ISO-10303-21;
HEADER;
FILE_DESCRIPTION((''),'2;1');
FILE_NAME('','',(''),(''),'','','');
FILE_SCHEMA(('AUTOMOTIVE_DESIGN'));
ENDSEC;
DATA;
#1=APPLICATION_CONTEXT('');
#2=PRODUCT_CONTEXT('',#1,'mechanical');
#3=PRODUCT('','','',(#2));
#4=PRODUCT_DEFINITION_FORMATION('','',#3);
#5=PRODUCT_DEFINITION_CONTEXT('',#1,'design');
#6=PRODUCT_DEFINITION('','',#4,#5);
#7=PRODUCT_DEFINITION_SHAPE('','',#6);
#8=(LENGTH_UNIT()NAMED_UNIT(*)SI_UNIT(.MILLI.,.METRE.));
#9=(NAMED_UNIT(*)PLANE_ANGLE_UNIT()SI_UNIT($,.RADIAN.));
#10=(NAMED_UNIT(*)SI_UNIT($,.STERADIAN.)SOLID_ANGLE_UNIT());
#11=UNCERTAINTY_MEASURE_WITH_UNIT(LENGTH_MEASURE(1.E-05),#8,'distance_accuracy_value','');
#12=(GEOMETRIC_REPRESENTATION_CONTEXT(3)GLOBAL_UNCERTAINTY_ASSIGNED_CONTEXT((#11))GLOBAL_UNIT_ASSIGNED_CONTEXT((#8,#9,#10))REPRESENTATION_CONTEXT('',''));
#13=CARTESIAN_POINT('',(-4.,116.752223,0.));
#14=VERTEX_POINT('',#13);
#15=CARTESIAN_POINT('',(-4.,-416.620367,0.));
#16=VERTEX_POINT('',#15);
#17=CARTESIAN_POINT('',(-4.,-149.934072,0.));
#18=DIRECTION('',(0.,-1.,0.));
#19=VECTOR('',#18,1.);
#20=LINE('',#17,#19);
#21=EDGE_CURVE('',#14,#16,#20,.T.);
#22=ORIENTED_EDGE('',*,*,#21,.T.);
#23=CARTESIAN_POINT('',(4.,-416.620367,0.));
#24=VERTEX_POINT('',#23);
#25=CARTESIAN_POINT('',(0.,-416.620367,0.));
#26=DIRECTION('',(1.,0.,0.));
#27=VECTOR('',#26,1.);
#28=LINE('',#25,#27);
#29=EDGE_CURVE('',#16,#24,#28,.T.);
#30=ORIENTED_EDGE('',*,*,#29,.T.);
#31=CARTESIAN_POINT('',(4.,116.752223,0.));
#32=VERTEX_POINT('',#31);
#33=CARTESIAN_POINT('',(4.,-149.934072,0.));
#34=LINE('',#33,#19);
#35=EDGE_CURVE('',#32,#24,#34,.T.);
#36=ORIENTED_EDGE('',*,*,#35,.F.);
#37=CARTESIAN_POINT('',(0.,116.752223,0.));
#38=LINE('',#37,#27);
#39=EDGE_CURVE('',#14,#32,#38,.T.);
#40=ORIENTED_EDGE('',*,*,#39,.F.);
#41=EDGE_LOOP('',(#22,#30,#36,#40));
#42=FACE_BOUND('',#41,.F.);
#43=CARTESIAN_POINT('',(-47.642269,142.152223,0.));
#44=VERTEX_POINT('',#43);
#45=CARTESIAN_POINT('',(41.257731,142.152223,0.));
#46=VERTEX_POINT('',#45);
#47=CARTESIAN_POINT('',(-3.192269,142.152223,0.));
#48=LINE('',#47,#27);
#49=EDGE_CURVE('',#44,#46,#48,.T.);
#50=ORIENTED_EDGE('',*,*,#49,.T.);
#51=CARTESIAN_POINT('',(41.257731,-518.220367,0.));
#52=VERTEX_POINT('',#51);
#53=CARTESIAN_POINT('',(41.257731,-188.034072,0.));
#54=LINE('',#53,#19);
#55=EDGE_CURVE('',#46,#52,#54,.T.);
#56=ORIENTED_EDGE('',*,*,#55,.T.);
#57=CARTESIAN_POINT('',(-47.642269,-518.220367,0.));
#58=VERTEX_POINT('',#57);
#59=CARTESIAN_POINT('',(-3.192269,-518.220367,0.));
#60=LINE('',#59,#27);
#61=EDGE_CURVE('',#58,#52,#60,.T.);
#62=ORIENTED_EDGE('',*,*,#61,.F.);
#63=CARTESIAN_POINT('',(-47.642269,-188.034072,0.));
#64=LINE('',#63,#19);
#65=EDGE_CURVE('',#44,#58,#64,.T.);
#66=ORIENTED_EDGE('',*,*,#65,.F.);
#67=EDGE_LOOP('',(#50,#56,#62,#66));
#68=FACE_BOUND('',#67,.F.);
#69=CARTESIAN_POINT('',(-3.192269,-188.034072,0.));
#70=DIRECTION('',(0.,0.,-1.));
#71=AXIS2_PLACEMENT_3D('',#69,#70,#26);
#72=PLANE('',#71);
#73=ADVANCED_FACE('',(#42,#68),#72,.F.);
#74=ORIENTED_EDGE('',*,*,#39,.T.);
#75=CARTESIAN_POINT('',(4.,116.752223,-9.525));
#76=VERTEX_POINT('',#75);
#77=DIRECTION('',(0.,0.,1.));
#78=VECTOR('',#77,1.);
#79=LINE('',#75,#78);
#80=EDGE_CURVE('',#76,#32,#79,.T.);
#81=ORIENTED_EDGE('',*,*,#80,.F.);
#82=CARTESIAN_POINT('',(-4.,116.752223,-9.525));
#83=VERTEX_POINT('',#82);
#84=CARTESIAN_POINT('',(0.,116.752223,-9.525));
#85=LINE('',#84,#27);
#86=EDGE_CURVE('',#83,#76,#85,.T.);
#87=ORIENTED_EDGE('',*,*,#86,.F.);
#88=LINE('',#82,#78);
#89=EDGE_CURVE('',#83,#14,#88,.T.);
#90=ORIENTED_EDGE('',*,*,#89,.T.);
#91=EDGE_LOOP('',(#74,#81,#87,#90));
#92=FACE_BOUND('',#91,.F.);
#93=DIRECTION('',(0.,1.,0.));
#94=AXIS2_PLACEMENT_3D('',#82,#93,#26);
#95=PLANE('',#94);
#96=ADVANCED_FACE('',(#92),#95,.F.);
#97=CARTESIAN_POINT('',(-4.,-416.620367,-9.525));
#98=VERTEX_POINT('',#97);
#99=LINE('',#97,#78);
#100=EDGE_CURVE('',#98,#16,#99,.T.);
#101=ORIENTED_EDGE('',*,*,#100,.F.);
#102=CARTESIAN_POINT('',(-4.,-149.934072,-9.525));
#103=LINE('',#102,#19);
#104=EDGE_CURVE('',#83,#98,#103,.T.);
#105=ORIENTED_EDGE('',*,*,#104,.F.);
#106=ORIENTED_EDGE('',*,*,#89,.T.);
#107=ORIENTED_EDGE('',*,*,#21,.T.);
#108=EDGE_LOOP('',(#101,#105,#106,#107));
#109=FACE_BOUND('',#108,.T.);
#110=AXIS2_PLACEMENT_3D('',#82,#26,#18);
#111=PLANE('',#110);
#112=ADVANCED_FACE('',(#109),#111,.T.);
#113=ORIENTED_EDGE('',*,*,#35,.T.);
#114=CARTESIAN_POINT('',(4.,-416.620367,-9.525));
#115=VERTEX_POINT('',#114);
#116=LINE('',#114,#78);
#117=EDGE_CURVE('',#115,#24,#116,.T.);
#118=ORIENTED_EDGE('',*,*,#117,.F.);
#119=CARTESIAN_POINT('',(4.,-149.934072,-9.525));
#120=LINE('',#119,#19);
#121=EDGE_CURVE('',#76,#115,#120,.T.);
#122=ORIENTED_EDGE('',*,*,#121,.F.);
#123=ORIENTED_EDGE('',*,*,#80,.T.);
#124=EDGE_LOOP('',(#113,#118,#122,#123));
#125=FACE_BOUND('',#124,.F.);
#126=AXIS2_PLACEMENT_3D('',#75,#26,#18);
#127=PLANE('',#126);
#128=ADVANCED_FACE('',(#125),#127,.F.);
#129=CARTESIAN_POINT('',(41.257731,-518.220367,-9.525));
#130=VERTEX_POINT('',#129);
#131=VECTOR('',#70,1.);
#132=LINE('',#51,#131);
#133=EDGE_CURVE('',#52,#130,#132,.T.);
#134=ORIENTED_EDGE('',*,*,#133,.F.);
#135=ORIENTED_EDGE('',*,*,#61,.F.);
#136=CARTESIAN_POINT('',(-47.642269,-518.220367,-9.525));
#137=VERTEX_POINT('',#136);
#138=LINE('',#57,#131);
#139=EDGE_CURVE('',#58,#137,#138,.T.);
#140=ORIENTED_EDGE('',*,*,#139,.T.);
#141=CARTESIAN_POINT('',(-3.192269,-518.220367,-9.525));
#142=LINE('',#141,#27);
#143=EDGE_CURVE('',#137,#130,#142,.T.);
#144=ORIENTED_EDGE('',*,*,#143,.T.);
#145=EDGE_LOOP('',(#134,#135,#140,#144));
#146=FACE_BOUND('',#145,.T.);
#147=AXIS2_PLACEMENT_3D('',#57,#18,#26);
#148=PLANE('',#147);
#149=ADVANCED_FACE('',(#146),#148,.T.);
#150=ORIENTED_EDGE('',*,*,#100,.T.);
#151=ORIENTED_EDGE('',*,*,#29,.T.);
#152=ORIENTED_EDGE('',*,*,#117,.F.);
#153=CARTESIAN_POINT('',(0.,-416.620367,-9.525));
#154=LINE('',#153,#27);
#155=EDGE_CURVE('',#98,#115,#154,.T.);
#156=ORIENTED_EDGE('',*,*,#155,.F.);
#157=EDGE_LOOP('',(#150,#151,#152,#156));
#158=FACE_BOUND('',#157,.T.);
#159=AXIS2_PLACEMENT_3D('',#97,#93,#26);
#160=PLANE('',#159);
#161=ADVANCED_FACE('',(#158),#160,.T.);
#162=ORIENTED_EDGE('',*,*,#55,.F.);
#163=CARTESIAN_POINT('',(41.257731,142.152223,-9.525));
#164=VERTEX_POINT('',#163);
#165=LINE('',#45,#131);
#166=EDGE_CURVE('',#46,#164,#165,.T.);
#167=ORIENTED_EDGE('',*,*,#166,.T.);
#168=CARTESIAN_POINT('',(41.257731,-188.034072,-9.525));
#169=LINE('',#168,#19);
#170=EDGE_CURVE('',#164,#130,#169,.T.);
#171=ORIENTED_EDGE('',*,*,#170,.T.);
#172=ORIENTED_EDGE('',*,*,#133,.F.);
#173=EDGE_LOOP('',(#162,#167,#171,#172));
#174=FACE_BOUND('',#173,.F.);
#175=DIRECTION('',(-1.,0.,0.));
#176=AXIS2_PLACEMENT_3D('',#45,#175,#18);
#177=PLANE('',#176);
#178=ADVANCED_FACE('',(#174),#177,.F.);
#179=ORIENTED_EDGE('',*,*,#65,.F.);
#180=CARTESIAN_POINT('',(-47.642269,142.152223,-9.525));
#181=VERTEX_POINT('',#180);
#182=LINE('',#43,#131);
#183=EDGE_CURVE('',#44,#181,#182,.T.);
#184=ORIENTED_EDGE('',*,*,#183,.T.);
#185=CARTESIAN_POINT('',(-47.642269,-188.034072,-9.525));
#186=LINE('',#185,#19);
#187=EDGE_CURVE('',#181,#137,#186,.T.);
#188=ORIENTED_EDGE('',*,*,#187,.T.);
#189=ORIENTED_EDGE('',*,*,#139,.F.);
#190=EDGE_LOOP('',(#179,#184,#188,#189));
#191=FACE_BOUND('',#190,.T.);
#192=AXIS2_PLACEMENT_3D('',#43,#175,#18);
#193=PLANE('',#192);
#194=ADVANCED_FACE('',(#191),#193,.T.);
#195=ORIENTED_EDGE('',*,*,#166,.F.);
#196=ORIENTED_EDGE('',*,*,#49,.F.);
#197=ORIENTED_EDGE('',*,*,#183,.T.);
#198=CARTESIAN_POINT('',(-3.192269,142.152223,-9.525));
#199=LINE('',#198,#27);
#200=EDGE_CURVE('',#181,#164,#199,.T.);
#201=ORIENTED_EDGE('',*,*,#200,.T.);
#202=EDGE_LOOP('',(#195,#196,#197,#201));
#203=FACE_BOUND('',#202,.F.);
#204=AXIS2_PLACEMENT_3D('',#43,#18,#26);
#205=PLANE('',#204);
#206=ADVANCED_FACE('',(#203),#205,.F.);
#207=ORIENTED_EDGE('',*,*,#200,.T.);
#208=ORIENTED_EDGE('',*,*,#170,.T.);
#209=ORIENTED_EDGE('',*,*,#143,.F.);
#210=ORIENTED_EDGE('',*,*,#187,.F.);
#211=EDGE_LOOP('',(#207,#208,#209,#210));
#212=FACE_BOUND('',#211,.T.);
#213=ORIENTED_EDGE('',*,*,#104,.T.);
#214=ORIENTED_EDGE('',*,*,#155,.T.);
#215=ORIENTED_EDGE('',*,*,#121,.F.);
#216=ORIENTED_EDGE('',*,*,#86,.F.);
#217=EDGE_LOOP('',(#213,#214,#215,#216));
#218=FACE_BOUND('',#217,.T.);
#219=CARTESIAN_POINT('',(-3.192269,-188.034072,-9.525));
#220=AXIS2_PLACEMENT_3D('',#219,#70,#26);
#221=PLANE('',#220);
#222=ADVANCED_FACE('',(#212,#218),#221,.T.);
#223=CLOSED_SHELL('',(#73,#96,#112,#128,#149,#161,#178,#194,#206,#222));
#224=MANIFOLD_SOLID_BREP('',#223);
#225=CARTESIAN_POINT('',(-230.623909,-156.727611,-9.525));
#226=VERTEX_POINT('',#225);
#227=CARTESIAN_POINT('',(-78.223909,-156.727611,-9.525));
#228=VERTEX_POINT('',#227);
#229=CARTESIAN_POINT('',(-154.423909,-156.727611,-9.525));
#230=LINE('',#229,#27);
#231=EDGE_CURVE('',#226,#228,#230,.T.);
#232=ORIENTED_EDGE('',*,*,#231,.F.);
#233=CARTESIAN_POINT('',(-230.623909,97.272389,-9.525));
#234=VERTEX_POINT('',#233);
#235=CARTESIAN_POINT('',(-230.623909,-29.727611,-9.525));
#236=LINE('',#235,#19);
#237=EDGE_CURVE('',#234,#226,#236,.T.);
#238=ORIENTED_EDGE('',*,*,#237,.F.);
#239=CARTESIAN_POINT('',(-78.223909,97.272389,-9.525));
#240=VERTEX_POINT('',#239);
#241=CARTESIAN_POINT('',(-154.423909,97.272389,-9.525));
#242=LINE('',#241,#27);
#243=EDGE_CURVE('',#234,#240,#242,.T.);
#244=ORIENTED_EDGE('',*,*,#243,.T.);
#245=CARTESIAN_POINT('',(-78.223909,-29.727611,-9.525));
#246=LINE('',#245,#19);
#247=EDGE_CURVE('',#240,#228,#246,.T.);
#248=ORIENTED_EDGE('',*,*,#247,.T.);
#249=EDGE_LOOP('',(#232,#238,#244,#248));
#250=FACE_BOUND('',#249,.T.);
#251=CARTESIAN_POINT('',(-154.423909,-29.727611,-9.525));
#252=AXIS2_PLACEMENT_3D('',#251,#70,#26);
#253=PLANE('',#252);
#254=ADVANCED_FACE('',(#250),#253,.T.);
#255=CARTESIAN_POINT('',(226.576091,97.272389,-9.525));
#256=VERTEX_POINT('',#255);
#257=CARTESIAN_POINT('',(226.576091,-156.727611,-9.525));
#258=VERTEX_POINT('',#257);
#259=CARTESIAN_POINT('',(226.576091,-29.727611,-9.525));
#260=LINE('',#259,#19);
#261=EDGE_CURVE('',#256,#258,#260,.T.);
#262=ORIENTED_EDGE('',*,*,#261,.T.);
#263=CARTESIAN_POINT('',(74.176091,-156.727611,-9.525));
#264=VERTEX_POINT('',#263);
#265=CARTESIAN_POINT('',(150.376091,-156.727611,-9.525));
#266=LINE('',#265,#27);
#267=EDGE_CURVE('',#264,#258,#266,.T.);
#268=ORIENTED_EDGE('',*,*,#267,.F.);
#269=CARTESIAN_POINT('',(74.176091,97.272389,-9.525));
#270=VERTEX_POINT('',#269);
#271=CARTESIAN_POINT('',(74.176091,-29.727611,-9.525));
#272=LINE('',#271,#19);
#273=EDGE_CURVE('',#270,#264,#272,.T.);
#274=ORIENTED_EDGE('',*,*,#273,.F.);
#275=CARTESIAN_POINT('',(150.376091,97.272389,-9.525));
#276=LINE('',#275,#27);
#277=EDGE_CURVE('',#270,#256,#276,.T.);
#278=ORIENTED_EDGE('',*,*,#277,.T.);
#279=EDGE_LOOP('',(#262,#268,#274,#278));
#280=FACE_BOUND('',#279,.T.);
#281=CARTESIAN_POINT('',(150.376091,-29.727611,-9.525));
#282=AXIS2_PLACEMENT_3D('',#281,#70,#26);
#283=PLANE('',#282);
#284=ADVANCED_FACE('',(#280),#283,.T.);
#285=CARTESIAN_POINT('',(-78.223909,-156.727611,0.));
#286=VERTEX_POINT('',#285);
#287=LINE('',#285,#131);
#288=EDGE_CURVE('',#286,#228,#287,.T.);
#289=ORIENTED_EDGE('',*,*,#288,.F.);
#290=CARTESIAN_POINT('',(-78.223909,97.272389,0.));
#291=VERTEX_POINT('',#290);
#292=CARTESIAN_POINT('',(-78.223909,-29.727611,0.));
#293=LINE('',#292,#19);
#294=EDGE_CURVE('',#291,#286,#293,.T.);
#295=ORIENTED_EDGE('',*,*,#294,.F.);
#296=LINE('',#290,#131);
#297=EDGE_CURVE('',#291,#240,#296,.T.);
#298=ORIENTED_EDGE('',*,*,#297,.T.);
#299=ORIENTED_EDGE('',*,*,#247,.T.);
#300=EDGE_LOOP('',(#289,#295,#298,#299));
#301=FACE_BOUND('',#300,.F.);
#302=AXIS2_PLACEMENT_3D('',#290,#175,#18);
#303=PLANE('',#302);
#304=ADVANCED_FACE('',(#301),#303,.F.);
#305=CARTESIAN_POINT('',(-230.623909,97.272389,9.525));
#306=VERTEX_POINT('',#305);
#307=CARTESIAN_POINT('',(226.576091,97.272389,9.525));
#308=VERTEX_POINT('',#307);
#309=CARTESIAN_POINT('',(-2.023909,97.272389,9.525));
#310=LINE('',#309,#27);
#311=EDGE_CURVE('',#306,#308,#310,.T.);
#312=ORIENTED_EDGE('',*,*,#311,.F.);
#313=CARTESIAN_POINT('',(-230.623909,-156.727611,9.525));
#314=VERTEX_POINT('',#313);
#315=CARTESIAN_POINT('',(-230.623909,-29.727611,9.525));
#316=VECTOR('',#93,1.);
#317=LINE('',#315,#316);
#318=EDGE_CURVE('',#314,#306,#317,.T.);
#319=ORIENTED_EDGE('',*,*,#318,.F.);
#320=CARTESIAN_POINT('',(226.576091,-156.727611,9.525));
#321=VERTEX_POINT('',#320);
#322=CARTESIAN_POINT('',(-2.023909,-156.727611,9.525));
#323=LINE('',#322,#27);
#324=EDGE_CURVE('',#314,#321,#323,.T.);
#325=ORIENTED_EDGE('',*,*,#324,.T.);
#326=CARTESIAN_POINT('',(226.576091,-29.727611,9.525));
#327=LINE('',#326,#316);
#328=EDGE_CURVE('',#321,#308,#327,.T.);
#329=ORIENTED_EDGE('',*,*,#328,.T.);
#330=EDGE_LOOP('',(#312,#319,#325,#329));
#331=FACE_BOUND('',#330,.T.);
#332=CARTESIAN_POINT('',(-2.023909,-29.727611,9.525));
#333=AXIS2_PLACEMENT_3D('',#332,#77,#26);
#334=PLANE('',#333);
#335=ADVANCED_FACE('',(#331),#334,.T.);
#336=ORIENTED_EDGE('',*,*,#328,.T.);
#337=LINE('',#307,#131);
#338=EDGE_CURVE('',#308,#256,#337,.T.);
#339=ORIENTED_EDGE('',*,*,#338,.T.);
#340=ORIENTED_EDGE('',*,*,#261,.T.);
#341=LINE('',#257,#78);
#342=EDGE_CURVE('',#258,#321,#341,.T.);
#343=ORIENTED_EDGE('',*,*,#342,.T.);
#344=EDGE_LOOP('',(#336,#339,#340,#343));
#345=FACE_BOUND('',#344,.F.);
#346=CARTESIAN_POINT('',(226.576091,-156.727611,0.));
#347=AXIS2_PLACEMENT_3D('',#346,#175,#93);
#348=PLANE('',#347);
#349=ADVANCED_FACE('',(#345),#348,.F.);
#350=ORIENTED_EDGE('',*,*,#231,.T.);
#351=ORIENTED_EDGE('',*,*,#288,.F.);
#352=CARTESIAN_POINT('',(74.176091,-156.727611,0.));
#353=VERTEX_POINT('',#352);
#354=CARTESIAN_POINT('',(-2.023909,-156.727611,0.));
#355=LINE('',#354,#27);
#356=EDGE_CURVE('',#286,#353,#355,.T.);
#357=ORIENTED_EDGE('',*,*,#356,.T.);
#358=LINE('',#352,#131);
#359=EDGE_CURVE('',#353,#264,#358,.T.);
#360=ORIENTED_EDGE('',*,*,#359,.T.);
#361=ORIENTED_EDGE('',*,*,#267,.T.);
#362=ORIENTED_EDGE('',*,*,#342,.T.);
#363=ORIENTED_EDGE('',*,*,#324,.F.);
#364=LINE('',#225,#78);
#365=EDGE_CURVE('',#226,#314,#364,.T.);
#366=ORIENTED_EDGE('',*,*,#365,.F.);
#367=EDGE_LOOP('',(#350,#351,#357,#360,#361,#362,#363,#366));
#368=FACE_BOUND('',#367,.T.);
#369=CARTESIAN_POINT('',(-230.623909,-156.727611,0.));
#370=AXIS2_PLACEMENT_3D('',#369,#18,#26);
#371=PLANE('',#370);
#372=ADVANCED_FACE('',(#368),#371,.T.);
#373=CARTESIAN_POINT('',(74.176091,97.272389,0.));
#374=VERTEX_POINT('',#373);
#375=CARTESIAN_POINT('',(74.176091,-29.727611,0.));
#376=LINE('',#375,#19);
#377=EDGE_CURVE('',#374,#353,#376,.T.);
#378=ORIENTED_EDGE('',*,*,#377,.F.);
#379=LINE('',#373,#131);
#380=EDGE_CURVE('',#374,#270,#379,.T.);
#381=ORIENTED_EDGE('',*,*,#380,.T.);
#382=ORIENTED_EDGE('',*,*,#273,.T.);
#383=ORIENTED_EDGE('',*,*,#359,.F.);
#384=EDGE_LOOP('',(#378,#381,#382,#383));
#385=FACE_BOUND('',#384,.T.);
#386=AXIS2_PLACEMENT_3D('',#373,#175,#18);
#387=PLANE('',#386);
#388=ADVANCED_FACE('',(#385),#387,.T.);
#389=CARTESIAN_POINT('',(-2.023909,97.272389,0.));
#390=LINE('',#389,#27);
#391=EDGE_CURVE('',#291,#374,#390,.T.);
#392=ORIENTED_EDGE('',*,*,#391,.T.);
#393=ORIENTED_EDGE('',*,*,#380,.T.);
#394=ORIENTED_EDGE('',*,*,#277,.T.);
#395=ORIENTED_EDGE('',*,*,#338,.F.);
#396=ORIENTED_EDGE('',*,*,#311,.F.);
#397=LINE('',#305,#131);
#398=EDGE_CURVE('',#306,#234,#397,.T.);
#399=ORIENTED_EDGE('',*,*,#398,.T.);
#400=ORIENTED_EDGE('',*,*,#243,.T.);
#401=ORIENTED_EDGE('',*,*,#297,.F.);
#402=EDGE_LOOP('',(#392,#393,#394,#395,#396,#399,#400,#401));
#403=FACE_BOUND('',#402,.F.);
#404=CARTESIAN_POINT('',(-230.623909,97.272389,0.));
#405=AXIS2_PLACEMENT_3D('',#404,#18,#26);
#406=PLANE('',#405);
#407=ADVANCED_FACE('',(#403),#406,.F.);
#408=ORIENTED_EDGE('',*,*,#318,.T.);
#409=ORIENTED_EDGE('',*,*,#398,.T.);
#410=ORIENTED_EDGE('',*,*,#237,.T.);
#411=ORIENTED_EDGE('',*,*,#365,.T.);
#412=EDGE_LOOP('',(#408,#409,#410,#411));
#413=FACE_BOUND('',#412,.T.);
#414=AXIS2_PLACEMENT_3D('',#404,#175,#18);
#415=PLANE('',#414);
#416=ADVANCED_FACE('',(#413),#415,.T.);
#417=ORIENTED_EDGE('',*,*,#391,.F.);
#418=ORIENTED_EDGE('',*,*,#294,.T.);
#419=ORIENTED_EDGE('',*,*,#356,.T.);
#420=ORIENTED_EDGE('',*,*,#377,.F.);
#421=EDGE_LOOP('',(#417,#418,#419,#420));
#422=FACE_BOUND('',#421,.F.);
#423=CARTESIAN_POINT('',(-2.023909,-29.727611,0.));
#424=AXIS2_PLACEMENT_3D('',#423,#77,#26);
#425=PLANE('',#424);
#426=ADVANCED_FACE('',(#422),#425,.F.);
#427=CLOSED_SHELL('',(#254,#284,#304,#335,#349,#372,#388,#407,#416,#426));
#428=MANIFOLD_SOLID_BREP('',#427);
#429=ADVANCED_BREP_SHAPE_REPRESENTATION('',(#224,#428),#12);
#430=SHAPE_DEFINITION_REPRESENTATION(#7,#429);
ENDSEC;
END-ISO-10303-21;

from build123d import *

# Parameters (mm, degrees)
F0_W     = 457.2
F0_H     = 254
F1_DEPTH = 9.525
F2_W     = 152.4
F2_H     = 254
F3_DEPTH = 9.525
F4_W     = 88.9
F4_H     = 660.3725897312
F5_DEPTH = 9.525
F6_W     = 8
F6_H     = 533.3725897312
F7_DEPTH = 9.525


# Not quite as in the source:
# - a length typed as a fraction of an inch, garbled in the dataset ("3 / 203.2 mm" for 3/8 in), is restored


with BuildPart() as f1:
    # F0 (on Top) → F1 (new body)
    with BuildSketch(Plane.XY):
        with Locations((-2.023909241, -29.7276111473)):
            Rectangle(F0_W, F0_H)
    extrude(amount=F1_DEPTH)

    # F2 (on face) → F3 (join)
    with BuildSketch(Plane(origin=(0, 0, 0), x_dir=(1, 0, 0), z_dir=(0, 0, -1))):
        with Locations((-154.423909241, 29.7276111473)):
            Rectangle(F2_W, F2_H)
        with Locations((150.376090759, 29.7276111473)):
            Rectangle(F2_W, F2_H)
    extrude(amount=F3_DEPTH)


with BuildPart() as f5:
    # F4 (on face) → F5 (new body)
    with BuildSketch(Plane(origin=(0, 0, 0), x_dir=(1, 0, 0), z_dir=(0, 0, -1))):
        with Locations((-3.192269256, 188.0340722744)):
            Rectangle(F4_W, F4_H)
    extrude(amount=F5_DEPTH)

    # F6 (on face) → F7 (cut, through all)
    with BuildSketch(Plane(origin=(0, 0, -9.525), x_dir=(1, 0, 0), z_dir=(0, 0, -1))):
        with Locations((0, 149.9340722744)):
            Rectangle(F6_W, F6_H)
    extrude(amount=-F7_DEPTH, mode=Mode.SUBTRACT)


solid = Compound([f1.part, f5.part])
